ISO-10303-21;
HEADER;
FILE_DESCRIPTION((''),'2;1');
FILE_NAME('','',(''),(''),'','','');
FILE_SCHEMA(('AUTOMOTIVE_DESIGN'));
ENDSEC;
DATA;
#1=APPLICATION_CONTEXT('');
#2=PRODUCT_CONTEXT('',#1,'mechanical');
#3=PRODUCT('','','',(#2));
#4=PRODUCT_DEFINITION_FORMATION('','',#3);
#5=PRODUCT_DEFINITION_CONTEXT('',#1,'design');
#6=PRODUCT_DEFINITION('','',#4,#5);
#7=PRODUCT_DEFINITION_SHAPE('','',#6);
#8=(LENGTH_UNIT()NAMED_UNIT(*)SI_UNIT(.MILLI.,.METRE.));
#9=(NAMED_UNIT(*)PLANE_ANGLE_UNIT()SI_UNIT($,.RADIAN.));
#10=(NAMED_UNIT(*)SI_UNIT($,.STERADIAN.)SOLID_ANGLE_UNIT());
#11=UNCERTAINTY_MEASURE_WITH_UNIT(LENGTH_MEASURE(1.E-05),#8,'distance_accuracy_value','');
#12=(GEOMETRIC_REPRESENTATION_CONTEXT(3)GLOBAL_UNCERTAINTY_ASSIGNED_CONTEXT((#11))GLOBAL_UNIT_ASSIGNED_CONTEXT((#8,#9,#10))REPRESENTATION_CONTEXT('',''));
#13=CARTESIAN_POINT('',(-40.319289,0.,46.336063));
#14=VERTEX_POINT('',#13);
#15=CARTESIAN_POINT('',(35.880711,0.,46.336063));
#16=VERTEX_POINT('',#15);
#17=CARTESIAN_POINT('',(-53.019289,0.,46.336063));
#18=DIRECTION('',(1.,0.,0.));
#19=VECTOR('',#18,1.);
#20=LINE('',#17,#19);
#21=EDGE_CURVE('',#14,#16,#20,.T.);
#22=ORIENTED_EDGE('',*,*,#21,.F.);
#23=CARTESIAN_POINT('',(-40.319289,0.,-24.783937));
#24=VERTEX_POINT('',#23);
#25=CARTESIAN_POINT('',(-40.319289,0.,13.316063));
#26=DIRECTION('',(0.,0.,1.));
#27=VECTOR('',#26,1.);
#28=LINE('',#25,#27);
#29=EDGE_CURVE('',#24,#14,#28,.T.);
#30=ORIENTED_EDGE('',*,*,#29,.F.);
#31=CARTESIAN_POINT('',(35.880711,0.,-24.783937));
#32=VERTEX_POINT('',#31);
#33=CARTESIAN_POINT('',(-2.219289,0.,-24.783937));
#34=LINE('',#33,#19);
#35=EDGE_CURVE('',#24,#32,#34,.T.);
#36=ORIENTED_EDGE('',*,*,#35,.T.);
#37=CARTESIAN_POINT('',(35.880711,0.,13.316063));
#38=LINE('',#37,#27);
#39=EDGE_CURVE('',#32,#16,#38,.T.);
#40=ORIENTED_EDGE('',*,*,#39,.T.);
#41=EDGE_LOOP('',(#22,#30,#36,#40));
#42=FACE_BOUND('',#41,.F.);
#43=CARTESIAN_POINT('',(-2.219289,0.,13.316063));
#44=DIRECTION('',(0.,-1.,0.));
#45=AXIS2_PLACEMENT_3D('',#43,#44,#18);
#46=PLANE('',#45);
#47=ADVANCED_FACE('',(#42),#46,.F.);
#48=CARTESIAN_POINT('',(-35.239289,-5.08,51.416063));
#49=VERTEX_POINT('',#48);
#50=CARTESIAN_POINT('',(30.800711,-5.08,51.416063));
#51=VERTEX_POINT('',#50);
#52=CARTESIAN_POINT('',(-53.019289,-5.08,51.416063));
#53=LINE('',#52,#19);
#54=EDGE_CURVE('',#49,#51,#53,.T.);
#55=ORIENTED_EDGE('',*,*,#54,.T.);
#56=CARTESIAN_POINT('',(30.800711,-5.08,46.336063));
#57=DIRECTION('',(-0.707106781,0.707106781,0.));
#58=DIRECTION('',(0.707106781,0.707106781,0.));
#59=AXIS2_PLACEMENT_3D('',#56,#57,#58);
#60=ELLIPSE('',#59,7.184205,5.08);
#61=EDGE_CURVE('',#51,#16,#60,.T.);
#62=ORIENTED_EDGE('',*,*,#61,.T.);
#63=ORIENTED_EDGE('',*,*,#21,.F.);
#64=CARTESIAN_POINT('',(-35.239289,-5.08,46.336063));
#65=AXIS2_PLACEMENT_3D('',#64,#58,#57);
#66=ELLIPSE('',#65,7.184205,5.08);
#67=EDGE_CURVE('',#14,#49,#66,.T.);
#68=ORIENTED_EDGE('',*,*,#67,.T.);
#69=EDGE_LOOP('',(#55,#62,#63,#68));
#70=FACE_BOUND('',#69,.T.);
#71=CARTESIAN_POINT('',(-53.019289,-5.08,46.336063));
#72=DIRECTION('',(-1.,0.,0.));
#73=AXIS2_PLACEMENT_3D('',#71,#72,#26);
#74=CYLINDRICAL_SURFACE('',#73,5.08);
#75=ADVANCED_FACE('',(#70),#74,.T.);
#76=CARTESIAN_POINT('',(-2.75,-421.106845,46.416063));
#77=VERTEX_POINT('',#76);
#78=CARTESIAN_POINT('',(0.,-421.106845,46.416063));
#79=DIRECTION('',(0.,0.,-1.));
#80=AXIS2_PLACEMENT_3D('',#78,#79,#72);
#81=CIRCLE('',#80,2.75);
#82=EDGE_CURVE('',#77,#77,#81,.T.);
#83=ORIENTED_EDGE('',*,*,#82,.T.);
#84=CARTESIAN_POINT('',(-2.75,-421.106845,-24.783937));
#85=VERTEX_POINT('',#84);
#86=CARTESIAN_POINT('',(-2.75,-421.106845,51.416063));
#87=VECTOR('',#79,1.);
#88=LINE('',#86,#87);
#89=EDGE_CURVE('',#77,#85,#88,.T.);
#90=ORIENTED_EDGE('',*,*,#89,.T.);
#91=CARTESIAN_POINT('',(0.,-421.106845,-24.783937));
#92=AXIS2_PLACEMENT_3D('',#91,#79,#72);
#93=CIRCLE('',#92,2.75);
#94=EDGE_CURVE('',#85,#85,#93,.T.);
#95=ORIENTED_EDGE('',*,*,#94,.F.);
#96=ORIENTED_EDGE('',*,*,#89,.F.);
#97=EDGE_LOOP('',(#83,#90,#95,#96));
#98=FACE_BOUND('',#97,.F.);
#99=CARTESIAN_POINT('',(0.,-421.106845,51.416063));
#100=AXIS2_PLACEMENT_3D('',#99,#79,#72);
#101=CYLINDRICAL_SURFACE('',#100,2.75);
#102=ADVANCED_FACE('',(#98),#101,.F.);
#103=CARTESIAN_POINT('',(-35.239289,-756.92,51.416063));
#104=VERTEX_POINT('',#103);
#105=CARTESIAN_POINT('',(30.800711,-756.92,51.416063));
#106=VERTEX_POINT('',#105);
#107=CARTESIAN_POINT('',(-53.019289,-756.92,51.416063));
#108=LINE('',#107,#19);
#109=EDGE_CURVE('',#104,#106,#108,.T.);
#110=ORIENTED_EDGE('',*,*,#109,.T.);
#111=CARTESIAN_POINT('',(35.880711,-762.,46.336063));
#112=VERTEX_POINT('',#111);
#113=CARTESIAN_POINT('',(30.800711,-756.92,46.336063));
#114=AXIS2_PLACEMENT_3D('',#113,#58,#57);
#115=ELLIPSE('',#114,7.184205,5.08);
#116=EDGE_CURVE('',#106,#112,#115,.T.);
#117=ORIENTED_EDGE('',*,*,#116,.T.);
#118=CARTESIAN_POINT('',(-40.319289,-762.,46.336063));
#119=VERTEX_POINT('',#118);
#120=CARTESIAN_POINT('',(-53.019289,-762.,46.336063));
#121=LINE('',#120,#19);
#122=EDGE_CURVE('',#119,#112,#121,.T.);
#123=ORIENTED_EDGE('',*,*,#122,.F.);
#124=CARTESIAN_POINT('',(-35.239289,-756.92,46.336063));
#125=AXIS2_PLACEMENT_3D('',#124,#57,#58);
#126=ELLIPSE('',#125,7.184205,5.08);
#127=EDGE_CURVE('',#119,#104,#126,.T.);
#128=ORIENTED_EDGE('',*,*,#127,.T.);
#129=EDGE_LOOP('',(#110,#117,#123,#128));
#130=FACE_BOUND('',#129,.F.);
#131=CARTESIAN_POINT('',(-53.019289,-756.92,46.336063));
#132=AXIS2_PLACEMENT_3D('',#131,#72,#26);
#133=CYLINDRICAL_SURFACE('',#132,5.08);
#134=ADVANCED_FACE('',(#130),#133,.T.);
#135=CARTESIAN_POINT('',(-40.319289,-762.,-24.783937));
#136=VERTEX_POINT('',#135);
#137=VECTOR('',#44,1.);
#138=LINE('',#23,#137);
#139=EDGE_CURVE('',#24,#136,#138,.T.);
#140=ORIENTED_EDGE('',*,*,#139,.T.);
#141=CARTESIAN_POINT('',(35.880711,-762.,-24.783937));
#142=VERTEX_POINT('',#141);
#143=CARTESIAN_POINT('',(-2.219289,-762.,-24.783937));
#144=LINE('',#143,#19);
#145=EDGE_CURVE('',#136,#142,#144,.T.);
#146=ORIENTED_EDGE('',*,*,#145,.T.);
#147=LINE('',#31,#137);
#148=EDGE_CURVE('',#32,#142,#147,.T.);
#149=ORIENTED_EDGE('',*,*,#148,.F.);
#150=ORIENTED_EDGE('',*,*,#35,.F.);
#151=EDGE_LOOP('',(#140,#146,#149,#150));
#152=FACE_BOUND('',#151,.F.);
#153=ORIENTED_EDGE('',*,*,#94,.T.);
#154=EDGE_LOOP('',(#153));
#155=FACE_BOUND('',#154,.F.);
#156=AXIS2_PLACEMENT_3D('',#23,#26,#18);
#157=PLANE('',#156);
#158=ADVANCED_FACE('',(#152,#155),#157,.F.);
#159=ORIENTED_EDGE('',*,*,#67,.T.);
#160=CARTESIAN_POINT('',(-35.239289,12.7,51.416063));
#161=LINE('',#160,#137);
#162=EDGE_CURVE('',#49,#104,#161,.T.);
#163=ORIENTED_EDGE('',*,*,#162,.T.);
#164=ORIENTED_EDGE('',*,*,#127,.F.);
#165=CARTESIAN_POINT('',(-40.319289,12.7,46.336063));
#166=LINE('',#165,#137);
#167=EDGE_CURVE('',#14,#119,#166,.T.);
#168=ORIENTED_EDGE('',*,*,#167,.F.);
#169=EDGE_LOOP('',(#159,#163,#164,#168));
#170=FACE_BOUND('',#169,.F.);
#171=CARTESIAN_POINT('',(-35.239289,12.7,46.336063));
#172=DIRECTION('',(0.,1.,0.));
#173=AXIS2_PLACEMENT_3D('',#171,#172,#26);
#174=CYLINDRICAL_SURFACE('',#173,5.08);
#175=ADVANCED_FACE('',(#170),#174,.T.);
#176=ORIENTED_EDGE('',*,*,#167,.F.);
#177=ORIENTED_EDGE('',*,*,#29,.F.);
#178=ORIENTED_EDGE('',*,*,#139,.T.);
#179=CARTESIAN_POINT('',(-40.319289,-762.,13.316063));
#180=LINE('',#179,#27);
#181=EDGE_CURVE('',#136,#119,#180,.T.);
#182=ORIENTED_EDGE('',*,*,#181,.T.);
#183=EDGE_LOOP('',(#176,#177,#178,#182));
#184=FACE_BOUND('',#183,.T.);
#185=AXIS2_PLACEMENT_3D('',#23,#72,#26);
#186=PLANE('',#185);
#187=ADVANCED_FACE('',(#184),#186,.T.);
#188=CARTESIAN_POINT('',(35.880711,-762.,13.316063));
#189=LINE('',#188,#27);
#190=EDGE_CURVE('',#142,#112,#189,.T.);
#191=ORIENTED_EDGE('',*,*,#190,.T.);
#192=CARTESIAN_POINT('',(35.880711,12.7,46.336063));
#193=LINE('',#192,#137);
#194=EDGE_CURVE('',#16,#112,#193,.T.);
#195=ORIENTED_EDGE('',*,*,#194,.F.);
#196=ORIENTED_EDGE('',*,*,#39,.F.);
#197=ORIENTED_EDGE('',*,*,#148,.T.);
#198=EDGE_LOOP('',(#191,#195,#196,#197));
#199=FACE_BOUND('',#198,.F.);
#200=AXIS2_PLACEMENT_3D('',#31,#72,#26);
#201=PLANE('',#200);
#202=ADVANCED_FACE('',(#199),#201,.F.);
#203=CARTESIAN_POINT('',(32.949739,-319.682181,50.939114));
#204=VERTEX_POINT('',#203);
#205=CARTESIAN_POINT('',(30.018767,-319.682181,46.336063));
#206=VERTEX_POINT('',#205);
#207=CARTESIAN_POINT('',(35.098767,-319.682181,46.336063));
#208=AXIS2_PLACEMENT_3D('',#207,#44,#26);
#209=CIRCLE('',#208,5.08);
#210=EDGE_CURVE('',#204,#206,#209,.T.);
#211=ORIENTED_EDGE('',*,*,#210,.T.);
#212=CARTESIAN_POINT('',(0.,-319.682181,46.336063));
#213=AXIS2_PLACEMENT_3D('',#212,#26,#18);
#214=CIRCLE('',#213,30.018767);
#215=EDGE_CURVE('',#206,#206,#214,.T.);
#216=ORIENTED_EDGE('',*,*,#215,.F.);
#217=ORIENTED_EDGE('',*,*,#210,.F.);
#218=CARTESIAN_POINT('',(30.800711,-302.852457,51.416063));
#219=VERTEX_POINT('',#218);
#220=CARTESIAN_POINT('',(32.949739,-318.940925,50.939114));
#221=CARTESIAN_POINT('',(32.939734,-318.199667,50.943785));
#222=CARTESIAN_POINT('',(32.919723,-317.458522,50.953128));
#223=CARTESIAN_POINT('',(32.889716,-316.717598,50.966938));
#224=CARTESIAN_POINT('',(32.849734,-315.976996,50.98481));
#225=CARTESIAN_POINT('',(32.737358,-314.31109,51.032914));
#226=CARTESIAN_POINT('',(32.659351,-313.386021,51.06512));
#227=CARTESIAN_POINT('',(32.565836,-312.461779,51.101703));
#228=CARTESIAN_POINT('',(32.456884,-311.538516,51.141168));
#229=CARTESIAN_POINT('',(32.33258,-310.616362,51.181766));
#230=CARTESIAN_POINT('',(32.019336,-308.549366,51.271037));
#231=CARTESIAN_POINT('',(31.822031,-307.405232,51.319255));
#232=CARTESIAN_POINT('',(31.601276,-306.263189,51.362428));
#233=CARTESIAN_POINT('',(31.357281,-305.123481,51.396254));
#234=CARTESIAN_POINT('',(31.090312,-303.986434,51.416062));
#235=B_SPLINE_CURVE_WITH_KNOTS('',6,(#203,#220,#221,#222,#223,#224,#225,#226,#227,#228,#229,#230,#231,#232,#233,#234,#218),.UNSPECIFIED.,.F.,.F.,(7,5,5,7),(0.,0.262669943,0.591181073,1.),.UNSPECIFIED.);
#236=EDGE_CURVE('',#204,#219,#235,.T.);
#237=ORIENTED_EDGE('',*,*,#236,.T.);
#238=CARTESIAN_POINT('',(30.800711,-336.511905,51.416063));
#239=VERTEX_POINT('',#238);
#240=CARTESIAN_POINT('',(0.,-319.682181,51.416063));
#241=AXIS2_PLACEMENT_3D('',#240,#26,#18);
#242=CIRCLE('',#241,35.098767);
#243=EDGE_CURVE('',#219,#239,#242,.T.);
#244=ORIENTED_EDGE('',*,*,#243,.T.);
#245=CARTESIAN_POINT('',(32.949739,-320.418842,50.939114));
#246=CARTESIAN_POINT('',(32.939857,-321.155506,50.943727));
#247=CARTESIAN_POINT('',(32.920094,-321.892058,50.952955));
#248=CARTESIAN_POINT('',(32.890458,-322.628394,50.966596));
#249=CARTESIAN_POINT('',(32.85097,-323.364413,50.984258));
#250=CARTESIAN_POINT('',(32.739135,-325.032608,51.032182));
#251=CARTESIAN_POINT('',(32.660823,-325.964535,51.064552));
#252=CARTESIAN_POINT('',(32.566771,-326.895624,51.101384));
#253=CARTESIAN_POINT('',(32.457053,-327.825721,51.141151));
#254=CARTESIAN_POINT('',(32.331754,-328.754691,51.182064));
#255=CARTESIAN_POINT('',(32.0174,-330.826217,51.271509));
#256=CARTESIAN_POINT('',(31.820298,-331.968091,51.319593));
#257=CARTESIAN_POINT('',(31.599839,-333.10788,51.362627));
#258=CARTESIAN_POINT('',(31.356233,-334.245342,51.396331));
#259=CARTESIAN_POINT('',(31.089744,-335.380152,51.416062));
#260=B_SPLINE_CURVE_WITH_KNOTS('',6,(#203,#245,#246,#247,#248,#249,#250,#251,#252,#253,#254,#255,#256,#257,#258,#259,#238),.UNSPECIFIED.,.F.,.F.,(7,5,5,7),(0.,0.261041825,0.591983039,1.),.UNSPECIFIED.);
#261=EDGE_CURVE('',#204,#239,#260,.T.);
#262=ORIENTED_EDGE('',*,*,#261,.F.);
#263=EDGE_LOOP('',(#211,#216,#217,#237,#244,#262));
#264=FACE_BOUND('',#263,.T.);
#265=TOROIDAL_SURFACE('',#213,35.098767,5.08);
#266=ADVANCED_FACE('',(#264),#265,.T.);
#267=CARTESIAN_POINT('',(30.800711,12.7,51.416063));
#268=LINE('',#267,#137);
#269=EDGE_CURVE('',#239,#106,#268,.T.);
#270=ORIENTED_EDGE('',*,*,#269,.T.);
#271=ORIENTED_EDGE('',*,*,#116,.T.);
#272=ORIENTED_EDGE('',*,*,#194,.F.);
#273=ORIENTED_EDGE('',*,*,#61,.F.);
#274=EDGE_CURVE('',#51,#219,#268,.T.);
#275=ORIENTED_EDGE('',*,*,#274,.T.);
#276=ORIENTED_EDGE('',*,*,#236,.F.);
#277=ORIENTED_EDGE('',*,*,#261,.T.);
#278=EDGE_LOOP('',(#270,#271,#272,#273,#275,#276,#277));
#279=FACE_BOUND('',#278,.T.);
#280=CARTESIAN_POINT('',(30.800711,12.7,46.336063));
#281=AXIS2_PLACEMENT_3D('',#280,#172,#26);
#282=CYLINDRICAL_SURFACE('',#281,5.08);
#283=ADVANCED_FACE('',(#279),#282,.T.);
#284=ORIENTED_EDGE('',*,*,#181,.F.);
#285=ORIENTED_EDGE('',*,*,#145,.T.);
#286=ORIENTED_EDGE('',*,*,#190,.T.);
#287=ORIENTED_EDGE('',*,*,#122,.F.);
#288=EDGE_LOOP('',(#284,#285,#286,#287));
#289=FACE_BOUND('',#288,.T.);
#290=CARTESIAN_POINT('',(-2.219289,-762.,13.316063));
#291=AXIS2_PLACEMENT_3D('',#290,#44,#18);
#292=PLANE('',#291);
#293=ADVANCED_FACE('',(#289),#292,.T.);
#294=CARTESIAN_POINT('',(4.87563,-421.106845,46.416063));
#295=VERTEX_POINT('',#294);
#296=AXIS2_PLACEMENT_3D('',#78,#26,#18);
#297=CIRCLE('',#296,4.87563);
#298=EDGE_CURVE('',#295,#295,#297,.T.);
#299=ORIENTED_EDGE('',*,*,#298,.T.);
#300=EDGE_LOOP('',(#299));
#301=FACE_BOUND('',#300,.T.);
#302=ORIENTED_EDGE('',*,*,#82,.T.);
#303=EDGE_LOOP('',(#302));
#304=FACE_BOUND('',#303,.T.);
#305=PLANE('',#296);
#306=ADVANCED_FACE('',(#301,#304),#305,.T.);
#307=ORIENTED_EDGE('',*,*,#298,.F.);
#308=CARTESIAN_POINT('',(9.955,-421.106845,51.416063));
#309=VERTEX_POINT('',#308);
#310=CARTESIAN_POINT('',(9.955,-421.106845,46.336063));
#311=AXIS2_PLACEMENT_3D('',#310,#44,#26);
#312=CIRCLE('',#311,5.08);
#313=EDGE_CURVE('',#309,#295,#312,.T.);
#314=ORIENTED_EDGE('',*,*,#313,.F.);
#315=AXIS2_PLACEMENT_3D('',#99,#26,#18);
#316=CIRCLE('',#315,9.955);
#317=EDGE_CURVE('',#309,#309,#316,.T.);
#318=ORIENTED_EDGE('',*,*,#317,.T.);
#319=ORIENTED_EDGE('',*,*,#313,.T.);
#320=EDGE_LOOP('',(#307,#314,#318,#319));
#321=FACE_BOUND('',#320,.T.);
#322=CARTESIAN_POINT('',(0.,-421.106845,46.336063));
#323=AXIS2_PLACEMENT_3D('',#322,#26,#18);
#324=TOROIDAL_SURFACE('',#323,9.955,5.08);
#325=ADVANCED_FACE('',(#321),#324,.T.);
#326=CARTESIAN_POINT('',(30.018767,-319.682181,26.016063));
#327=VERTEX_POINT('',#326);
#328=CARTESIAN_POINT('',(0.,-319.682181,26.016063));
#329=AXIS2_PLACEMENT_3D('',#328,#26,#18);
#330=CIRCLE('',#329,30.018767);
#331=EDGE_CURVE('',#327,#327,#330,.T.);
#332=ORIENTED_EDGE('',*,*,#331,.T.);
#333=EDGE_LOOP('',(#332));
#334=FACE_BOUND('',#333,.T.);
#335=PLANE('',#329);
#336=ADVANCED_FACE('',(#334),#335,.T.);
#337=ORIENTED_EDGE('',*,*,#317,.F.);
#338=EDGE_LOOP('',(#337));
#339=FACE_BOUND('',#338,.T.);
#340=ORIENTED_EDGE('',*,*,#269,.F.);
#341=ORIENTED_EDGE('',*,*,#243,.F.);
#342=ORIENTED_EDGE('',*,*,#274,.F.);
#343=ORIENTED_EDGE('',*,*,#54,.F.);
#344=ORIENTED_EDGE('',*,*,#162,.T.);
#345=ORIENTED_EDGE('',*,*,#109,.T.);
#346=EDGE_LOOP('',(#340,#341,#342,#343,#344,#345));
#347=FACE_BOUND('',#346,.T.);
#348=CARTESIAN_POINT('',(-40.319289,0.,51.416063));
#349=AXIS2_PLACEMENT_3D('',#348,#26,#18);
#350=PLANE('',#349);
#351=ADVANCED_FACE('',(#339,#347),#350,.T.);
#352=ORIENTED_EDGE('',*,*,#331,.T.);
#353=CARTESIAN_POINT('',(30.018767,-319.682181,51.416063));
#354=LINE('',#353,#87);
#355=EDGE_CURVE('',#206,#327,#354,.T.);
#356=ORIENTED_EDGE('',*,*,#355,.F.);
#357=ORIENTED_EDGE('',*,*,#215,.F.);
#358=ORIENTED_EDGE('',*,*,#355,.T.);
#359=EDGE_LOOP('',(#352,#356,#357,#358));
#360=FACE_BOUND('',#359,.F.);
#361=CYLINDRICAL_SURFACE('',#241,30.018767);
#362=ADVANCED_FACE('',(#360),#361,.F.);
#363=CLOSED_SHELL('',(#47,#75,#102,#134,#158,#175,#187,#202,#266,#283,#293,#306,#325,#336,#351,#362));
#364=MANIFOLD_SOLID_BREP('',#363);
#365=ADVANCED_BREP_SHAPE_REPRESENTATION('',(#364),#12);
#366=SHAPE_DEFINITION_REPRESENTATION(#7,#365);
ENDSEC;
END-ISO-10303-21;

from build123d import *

# Parameters (mm, degrees)
F0_W           = 76.2
F0_H           = 76.2
F1_DEPTH       = 762
F3_D           = 5.5
F3_CBORE_D     = 9.75
F3_CBORE_DEPTH = 5
F4_R           = 30.0187668276
F5_DEPTH       = 25.4
F6_T1_DEPTH    = 787.4
F6_T3_DEPTH    = 101.6


# Not quite as in the source:
# - a fillet or chamfer that OpenCascade refuses, or shapes differently, is made with other operations: its cross-section is extruded or revolved along the edge and cut away or added


with BuildPart() as f1:
    # F0 (on Front) → F1 (new body)
    with BuildSketch(Plane.XZ):
        with Locations((-2.2192886099, 13.3160627689)):
            Rectangle(F0_W, F0_H)
    extrude(amount=F1_DEPTH)

    # F3 (through all)
    with Locations(Plane.XY.offset(51.4160627689)):
        with Locations((0, -421.1068451405)):
            CounterBoreHole(F3_D / 2, F3_CBORE_D / 2, F3_CBORE_DEPTH)

    # F4 (on face) → F5 (cut)
    with BuildSketch(Plane.XY.offset(51.4160627689)):
        with Locations((0, -319.6821808815)):
            Circle(F4_R)
    extrude(amount=-F5_DEPTH, mode=Mode.SUBTRACT)

    # F6: fillet of radius 5.08 on 6 edges, made by hand

    # F6_s2 → F6_t1 (cut)
    with BuildSketch(Plane.XZ.offset(-12.7)):
        with BuildLine():
            ThreePointArc((30.8007113901, 51.4160627689), (34.3928138385, 49.9281652174), (35.8807113901, 46.3360627689))
            Line((35.8807113901, 46.3360627689), (35.8807113901, 51.4160627689))
            Line((35.8807113901, 51.4160627689), (30.8007113901, 51.4160627689))
        make_face()
        with BuildLine():
            ThreePointArc((-35.2392886099, 51.4160627689), (-38.8313910583, 49.9281652174), (-40.3192886099, 46.3360627689))
            Line((-40.3192886099, 46.3360627689), (-40.3192886099, 51.4160627689))
            Line((-40.3192886099, 51.4160627689), (-35.2392886099, 51.4160627689))
        make_face()
    extrude(amount=F6_T1_DEPTH, mode=Mode.SUBTRACT)

    # F6_s4 → F6_t3 (cut)
    with BuildSketch(Plane.YZ.offset(-53.0192886099)):
        with BuildLine():
            ThreePointArc((-5.08, 51.4160627689), (-1.4878975516, 49.9281652174), (0, 46.3360627689))
            Line((0, 46.3360627689), (0, 51.4160627689))
            Line((0, 51.4160627689), (-5.08, 51.4160627689))
        make_face()
        with BuildLine():
            ThreePointArc((-756.92, 51.4160627689), (-760.5121024484, 49.9281652174), (-762, 46.3360627689))
            Line((-762, 46.3360627689), (-762, 51.4160627689))
            Line((-762, 51.4160627689), (-756.92, 51.4160627689))
        make_face()
    extrude(amount=F6_T3_DEPTH, mode=Mode.SUBTRACT)


with BuildPart() as f6_tool6:
    # F6_s7 → F6_t8 (revolve)
    with BuildSketch(Plane.XZ.offset(421.1068451405)):
        with BuildLine():
            ThreePointArc((9.955, 51.4160627689), (6.3628975516, 49.9281652174), (4.875, 46.3360627689))
            Line((4.875, 46.3360627689), (4.875, 51.4160627689))
            Line((4.875, 51.4160627689), (9.955, 51.4160627689))
        make_face()
    revolve(axis=Axis((0, -421.1068451405, 51.4160627689), (0, 0, 1)))

    split(bisect_by=Plane.XY.offset(46.4160627689), keep=Keep.TOP)


with BuildPart() as f1_1:
    add(f1.part)

    # F6_t5: cut F6_tool6
    add(f6_tool6.part, mode=Mode.SUBTRACT)

    # F6_s10 → F6_t11 (revolve, cut)
    with BuildSketch(Plane.XZ.offset(319.6821808815)):
        with BuildLine():
            ThreePointArc((35.0987668276, 51.4160627689), (31.5066643792, 49.9281652174), (30.0187668276, 46.3360627689))
            Line((30.0187668276, 46.3360627689), (30.0187668276, 51.4160627689))
            Line((30.0187668276, 51.4160627689), (35.0987668276, 51.4160627689))
        make_face()
    revolve(axis=Axis((0, -319.6821808815, 51.4160627689), (0, 0, 1)), mode=Mode.SUBTRACT)


solid = f1_1.part
